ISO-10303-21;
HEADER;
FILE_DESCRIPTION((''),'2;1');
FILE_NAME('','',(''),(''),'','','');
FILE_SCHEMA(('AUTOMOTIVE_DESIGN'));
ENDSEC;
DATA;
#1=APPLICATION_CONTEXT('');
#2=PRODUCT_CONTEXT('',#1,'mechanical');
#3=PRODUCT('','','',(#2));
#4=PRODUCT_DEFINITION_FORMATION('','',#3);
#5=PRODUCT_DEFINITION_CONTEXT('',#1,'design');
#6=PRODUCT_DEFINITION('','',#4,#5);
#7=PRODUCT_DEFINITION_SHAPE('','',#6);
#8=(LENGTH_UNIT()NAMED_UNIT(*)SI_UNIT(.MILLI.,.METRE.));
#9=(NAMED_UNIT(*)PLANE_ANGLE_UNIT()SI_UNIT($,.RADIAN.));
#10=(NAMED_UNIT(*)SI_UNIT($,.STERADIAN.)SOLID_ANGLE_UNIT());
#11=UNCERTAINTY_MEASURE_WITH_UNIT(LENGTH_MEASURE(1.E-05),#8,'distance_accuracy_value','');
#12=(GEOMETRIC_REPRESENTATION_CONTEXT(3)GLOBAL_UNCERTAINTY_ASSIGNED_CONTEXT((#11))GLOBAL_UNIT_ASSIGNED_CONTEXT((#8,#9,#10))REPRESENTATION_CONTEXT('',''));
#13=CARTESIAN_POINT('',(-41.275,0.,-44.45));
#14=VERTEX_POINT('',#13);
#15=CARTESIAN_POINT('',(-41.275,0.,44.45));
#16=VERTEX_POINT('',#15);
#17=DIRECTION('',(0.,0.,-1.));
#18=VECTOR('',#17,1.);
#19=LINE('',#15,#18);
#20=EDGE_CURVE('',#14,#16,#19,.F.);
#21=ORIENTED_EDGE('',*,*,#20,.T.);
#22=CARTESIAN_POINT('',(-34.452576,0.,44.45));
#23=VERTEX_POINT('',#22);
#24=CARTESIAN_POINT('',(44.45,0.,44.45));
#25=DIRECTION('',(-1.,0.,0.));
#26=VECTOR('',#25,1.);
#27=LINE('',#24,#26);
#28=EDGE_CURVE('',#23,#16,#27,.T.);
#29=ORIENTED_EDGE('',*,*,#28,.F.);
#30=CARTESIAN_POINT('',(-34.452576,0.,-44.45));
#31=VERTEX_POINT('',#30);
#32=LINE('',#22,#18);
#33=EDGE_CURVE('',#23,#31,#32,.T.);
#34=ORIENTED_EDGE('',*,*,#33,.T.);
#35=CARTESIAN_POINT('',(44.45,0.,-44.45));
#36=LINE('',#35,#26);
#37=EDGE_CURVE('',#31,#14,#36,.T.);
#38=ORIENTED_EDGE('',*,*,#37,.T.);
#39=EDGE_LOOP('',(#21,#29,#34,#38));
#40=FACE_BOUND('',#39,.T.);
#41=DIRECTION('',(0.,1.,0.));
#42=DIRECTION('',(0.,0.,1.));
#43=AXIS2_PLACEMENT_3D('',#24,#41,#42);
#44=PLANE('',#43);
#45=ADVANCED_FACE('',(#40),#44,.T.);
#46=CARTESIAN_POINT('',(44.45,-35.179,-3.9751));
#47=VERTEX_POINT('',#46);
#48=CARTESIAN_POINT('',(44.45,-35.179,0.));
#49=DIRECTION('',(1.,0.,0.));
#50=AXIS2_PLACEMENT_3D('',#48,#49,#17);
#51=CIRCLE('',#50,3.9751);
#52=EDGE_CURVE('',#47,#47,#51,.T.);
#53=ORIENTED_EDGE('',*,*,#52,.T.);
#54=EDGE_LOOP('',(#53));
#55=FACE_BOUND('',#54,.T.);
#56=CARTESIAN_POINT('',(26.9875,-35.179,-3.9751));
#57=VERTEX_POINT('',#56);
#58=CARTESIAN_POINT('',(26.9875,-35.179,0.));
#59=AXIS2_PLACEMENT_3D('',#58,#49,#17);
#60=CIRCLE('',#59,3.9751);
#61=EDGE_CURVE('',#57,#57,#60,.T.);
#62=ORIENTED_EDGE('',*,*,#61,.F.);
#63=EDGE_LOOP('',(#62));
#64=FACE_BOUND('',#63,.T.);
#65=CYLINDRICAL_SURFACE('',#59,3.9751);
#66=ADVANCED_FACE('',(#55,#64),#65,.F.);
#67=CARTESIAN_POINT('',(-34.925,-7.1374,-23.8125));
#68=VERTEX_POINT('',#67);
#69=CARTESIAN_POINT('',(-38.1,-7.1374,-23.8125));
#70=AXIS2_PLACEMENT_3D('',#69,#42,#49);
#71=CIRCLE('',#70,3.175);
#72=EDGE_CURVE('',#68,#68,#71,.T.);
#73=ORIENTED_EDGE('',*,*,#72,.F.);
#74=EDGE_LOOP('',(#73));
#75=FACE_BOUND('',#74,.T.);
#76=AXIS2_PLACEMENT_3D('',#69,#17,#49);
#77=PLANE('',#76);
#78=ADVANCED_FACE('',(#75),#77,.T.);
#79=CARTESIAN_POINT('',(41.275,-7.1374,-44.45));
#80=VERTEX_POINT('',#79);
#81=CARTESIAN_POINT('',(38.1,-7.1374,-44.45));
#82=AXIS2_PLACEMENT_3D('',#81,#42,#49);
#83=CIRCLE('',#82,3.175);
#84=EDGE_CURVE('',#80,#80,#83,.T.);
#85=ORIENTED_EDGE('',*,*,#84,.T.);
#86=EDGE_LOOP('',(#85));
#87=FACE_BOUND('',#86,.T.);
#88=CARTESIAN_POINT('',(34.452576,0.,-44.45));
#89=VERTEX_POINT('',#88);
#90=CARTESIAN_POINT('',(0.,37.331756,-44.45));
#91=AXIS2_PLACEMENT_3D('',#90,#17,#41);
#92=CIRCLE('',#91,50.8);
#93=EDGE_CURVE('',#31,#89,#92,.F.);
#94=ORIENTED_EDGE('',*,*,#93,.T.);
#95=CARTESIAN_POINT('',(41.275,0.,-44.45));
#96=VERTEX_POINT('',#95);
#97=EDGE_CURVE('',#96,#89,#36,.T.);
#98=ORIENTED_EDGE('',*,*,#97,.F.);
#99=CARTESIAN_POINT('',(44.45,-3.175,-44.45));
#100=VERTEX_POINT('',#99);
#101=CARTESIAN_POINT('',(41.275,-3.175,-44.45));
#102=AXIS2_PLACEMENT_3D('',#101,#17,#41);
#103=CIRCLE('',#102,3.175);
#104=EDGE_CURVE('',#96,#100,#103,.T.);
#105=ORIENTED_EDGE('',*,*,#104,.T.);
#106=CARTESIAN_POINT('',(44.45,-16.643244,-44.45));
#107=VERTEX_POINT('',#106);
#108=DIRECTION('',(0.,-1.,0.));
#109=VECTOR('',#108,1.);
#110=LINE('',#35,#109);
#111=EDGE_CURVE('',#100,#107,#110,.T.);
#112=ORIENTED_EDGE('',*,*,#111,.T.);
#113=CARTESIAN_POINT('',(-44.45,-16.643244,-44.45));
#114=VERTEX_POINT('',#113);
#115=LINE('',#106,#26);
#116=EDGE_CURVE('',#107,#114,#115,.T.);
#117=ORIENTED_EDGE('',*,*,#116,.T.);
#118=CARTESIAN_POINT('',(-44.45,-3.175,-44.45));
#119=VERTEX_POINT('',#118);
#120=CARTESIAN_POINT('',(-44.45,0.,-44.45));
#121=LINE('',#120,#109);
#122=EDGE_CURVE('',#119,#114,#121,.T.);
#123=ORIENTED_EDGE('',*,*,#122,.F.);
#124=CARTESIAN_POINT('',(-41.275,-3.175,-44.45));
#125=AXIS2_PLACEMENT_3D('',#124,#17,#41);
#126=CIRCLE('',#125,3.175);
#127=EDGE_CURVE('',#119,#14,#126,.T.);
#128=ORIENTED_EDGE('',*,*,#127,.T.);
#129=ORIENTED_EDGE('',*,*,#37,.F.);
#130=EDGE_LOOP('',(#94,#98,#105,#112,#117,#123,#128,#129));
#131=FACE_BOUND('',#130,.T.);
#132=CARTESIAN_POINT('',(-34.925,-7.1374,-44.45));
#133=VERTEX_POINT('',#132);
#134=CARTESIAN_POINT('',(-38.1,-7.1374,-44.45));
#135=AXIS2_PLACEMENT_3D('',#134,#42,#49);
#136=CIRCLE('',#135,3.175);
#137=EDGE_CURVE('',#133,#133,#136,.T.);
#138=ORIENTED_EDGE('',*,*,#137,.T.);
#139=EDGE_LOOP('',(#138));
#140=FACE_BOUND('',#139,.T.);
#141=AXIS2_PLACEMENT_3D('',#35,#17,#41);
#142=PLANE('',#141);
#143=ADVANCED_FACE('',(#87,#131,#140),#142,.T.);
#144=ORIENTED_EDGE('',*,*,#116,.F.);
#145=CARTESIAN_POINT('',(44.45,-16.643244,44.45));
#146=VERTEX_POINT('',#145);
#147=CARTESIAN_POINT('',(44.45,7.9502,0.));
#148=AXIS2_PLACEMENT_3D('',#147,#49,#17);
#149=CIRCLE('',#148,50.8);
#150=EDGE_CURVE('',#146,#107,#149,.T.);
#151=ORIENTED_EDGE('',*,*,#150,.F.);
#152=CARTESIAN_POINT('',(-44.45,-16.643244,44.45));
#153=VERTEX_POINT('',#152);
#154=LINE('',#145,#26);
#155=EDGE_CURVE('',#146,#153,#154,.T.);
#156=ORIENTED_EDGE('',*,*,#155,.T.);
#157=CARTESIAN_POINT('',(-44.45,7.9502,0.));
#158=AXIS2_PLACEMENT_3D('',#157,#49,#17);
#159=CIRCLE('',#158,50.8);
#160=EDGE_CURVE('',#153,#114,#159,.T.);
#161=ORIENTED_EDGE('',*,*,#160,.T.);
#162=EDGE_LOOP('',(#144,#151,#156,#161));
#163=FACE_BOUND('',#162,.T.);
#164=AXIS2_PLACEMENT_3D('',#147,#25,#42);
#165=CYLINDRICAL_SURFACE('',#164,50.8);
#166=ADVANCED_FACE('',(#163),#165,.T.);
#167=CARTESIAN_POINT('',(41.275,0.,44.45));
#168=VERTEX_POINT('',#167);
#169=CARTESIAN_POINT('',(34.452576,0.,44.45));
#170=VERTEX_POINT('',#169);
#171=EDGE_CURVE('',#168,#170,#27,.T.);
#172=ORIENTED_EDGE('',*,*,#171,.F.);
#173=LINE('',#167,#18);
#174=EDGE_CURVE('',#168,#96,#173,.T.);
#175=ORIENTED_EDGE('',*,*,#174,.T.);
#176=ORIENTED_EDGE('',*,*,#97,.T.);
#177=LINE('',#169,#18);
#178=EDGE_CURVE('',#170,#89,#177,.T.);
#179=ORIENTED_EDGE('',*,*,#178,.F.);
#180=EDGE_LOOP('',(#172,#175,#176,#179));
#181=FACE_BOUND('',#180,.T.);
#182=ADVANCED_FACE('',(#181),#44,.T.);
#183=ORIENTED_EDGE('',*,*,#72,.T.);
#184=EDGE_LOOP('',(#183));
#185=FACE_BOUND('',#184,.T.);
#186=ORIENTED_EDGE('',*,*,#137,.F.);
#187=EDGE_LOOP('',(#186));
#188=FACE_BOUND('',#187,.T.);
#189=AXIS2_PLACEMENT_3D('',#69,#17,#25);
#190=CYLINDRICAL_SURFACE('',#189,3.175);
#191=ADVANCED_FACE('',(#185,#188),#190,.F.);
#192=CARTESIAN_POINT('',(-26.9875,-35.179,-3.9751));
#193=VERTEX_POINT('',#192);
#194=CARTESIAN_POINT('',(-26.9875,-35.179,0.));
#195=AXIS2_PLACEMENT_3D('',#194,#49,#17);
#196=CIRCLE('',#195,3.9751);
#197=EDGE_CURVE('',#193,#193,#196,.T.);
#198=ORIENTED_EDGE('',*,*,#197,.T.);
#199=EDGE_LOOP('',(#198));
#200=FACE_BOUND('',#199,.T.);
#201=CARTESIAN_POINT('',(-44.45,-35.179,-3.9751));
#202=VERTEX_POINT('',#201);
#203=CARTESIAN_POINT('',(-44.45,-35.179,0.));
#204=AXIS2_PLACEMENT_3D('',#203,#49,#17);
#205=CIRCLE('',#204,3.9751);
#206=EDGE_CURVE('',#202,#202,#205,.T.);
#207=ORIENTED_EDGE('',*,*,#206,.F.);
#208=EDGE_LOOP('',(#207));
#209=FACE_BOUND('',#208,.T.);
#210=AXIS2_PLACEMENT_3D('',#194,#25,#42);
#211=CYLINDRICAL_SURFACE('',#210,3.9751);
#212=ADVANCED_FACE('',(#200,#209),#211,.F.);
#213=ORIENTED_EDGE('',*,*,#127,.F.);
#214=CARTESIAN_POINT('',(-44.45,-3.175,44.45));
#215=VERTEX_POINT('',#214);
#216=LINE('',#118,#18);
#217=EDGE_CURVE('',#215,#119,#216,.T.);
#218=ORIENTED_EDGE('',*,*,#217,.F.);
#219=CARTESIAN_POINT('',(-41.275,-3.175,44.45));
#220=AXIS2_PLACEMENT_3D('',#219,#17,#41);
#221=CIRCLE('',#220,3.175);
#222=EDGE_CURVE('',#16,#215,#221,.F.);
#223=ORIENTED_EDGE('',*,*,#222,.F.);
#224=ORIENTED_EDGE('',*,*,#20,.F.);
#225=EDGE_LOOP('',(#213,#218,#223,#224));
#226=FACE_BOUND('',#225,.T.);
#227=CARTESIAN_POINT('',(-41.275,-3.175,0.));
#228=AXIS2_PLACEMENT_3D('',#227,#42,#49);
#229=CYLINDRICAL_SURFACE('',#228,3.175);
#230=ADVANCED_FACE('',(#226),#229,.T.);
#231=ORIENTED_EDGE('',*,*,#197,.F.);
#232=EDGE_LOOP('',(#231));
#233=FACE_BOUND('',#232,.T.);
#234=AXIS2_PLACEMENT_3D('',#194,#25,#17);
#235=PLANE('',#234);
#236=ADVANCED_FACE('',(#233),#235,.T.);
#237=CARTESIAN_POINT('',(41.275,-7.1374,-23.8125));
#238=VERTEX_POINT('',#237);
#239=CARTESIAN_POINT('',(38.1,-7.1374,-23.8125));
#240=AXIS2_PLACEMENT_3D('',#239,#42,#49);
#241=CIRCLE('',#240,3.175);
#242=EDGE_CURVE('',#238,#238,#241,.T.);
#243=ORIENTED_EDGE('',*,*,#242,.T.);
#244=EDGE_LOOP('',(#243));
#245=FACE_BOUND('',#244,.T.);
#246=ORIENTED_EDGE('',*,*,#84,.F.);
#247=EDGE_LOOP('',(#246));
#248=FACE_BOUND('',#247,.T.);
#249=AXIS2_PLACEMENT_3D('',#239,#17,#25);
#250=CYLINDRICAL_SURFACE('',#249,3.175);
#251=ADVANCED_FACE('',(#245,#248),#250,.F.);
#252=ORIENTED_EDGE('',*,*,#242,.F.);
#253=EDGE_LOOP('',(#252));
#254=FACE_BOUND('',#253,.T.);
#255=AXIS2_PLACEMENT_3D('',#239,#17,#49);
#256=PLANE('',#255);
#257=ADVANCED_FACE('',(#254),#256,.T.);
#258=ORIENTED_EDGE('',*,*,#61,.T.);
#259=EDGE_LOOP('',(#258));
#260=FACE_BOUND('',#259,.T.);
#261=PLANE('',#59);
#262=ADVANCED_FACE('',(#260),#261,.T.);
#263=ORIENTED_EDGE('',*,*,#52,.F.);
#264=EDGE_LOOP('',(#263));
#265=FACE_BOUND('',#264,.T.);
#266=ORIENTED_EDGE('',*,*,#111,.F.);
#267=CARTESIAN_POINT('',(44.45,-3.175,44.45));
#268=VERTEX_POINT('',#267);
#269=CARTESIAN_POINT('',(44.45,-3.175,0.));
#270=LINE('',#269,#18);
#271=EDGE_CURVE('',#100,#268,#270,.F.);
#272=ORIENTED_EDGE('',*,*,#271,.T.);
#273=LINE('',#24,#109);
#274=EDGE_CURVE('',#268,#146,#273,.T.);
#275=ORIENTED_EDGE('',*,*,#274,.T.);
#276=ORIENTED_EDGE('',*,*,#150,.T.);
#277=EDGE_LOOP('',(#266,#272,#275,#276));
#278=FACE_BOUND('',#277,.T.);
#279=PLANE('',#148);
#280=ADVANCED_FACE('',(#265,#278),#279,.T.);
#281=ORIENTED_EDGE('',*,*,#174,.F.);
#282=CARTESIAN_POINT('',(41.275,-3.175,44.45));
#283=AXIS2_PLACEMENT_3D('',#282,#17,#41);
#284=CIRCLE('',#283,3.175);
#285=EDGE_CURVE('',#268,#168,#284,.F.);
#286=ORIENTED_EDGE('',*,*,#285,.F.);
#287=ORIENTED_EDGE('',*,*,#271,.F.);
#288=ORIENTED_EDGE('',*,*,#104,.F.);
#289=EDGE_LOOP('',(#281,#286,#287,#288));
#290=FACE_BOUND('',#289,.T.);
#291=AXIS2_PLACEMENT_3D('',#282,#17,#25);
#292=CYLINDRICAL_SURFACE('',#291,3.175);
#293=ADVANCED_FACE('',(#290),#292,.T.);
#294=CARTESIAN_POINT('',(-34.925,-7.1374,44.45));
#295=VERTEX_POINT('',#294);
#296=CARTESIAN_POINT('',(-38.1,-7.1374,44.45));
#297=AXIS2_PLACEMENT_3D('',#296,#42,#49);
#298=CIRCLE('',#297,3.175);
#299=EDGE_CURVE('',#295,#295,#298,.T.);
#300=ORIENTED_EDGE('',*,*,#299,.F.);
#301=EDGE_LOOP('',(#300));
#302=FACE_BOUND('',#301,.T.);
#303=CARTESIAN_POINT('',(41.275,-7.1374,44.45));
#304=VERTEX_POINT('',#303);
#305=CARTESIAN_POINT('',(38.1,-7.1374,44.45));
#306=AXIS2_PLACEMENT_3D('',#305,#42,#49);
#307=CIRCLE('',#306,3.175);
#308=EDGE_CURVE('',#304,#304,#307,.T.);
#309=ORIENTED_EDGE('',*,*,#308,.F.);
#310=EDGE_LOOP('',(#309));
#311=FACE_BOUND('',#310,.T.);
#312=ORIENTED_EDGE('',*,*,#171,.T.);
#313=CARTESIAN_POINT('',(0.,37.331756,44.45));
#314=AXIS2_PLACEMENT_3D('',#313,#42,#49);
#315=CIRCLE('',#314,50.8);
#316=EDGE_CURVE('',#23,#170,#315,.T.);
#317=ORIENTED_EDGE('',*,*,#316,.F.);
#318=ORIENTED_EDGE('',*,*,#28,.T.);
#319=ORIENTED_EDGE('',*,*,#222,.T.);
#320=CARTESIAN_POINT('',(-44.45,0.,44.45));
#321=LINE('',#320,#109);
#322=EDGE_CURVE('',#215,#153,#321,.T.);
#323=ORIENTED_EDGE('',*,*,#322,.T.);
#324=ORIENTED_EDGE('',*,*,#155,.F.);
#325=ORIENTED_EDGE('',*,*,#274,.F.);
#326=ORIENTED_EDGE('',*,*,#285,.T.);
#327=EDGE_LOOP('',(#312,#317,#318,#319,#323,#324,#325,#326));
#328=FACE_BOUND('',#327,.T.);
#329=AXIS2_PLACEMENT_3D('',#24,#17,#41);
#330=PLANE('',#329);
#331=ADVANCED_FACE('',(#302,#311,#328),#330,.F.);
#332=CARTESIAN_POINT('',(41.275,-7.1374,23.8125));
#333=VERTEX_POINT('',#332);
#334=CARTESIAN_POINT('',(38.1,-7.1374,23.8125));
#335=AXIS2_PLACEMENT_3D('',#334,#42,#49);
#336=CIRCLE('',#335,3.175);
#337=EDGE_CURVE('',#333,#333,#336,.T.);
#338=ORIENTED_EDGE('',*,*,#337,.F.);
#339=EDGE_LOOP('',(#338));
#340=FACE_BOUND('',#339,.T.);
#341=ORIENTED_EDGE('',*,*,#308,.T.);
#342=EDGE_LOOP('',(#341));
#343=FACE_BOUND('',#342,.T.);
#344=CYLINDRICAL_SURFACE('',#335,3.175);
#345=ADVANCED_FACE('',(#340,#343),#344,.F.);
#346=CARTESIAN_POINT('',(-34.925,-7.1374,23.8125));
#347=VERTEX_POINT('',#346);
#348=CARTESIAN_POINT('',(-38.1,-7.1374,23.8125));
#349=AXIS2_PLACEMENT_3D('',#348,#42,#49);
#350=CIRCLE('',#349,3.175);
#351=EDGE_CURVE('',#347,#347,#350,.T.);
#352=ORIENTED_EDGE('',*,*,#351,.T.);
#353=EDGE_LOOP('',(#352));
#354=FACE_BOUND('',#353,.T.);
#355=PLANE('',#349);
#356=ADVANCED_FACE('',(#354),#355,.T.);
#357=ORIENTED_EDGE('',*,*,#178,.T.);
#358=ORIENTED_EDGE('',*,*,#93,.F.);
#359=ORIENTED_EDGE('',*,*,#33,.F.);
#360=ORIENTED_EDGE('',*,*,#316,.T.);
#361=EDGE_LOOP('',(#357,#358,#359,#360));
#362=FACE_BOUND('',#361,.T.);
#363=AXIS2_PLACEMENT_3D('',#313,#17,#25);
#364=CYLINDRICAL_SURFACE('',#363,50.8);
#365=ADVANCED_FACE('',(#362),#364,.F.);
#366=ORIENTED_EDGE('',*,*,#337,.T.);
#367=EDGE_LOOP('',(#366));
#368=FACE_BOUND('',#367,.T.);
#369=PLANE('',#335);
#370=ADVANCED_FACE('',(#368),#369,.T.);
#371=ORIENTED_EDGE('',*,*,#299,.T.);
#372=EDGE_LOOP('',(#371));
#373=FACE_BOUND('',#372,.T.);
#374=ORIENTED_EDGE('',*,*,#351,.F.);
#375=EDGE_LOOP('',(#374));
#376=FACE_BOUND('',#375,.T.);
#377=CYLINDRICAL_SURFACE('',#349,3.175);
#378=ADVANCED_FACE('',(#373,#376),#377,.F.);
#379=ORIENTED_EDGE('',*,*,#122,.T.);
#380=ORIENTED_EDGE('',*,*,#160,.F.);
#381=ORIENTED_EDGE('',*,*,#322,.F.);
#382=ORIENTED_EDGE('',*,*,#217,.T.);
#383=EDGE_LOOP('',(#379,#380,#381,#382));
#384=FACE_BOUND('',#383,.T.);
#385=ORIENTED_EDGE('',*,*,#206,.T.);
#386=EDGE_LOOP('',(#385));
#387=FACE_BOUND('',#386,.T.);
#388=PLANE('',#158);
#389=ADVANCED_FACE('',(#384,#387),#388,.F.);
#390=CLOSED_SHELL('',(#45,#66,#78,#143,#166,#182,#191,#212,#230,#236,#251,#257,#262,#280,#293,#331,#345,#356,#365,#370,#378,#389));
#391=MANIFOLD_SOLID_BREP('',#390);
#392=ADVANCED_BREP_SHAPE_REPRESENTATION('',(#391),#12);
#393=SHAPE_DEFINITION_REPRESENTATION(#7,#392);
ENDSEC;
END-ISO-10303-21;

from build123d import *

# Parameters (mm, degrees)
BASE_EXTRUDE_DEPTH      = 44.45
CUT_EXTRUDE1_DEPTH      = 109.236398037
FILLET1_R               = 3.175
HOLE1_START             = 23.8125
HOLE1_OUTLINE_R         = 3.175
HOLE1_DEPTH             = 20.6375
LPATTERN1_COUNT         = 2
LPATTERN1_PITCH         = 76.2
MIRROR1_START           = 23.8125
MIRROR1_COPY_1_SKETCH_R = 3.175
MIRROR1_COPY_1_DEPTH    = 20.6375
MIRROR1_COPY_2_SKETCH_R = 3.175
MIRROR1_COPY_2_DEPTH    = 20.6375
HOLE2_START             = 26.9875
HOLE2_OUTLINE_R         = 3.9751
HOLE2_DEPTH             = 17.4625


# Read off the part's stored shape, not the designer's step: Hole1, Hole2
with BuildPart() as part:
    # Sketch1 → Base-Extrude (new, symmetric)
    with BuildSketch(Plane(origin=(0, 0, 0), x_dir=(0, 0, -1), z_dir=(1, 0, 0))):
        with BuildLine():
            Line((-44.45, 0), (44.45, 0))
            Line((44.45, 0), (44.45, -16.643244248))
            ThreePointArc((44.45, -16.643244248), (0, -42.8498), (-44.45, -16.643244248))
            Line((-44.45, -16.643244248), (-44.45, 0))
        make_face()
    extrude(amount=BASE_EXTRUDE_DEPTH, both=True)

    # Sketch2 → Cut-Extrude1 (cut, through all)
    with BuildSketch(Plane.XY.offset(44.45)):
        with BuildLine():
            Line((-173.766299507, 128.569272459), (-34.452576283, 0))
            ThreePointArc((-34.452576283, 0), (0, -13.468244248), (34.452576283, 0))
            Line((34.452576283, 0), (173.766299507, 128.569272459))
            Line((173.766299507, 128.569272459), (173.766299507, 507.717640776))
            Line((173.766299507, 507.717640776), (-173.766299507, 507.717640776))
            Line((-173.766299507, 507.717640776), (-173.766299507, 128.569272459))
        make_face()
    extrude(amount=-CUT_EXTRUDE1_DEPTH, mode=Mode.SUBTRACT)

    # Fillet1
    fillet1_edges = [part.edges().sort_by_distance(p)[0] for p in [
        (44.45, 0, 0),
        (-44.45, 0, 0),
    ]]
    fillet(fillet1_edges, radius=FILLET1_R)

    # Hole1 outline → Hole1 (cut)
    with BuildSketch(Plane.XY.offset(HOLE1_START)):
        with Locations((-38.1, -7.1374)):
            Circle(HOLE1_OUTLINE_R)
    hole1 = extrude(amount=HOLE1_DEPTH, mode=Mode.SUBTRACT)

    # LPattern1: Hole1 ×2
    with Locations(*[(i * LPATTERN1_PITCH, 0, 0) for i in range(1, LPATTERN1_COUNT)]):
        add(hole1, mode=Mode.SUBTRACT)

    # Mirror1 copy 1 sketch → Mirror1 copy 1 (cut)
    with BuildSketch(Plane(origin=(76.2, 0, 0), x_dir=(1, 0, 0), z_dir=(0, 0, -1)).offset(MIRROR1_START)):
        with Locations((-38.1, 7.1374)):
            Circle(MIRROR1_COPY_1_SKETCH_R)
    extrude(amount=MIRROR1_COPY_1_DEPTH, mode=Mode.SUBTRACT)

    # Mirror1 copy 2 sketch → Mirror1 copy 2 (cut)
    with BuildSketch(Plane(origin=(0, 0, 0), x_dir=(1, 0, 0), z_dir=(0, 0, -1)).offset(MIRROR1_START)):
        with Locations((-38.1, 7.1374)):
            Circle(MIRROR1_COPY_2_SKETCH_R)
    extrude(amount=MIRROR1_COPY_2_DEPTH, mode=Mode.SUBTRACT)

    # Hole2 outline → Hole2 (cut)
    with BuildSketch(Plane.YZ.offset(HOLE2_START)):
        with Locations((-35.179, 0)):
            Circle(HOLE2_OUTLINE_R)
    hole2 = extrude(amount=HOLE2_DEPTH, mode=Mode.SUBTRACT)

    # Mirror2: Hole2 across plane
    add(hole2.mirror(Plane(origin=(0, 0, 0), x_dir=(0, 0, 1), z_dir=(1, 0, 0))), mode=Mode.SUBTRACT)


solid = part.part
